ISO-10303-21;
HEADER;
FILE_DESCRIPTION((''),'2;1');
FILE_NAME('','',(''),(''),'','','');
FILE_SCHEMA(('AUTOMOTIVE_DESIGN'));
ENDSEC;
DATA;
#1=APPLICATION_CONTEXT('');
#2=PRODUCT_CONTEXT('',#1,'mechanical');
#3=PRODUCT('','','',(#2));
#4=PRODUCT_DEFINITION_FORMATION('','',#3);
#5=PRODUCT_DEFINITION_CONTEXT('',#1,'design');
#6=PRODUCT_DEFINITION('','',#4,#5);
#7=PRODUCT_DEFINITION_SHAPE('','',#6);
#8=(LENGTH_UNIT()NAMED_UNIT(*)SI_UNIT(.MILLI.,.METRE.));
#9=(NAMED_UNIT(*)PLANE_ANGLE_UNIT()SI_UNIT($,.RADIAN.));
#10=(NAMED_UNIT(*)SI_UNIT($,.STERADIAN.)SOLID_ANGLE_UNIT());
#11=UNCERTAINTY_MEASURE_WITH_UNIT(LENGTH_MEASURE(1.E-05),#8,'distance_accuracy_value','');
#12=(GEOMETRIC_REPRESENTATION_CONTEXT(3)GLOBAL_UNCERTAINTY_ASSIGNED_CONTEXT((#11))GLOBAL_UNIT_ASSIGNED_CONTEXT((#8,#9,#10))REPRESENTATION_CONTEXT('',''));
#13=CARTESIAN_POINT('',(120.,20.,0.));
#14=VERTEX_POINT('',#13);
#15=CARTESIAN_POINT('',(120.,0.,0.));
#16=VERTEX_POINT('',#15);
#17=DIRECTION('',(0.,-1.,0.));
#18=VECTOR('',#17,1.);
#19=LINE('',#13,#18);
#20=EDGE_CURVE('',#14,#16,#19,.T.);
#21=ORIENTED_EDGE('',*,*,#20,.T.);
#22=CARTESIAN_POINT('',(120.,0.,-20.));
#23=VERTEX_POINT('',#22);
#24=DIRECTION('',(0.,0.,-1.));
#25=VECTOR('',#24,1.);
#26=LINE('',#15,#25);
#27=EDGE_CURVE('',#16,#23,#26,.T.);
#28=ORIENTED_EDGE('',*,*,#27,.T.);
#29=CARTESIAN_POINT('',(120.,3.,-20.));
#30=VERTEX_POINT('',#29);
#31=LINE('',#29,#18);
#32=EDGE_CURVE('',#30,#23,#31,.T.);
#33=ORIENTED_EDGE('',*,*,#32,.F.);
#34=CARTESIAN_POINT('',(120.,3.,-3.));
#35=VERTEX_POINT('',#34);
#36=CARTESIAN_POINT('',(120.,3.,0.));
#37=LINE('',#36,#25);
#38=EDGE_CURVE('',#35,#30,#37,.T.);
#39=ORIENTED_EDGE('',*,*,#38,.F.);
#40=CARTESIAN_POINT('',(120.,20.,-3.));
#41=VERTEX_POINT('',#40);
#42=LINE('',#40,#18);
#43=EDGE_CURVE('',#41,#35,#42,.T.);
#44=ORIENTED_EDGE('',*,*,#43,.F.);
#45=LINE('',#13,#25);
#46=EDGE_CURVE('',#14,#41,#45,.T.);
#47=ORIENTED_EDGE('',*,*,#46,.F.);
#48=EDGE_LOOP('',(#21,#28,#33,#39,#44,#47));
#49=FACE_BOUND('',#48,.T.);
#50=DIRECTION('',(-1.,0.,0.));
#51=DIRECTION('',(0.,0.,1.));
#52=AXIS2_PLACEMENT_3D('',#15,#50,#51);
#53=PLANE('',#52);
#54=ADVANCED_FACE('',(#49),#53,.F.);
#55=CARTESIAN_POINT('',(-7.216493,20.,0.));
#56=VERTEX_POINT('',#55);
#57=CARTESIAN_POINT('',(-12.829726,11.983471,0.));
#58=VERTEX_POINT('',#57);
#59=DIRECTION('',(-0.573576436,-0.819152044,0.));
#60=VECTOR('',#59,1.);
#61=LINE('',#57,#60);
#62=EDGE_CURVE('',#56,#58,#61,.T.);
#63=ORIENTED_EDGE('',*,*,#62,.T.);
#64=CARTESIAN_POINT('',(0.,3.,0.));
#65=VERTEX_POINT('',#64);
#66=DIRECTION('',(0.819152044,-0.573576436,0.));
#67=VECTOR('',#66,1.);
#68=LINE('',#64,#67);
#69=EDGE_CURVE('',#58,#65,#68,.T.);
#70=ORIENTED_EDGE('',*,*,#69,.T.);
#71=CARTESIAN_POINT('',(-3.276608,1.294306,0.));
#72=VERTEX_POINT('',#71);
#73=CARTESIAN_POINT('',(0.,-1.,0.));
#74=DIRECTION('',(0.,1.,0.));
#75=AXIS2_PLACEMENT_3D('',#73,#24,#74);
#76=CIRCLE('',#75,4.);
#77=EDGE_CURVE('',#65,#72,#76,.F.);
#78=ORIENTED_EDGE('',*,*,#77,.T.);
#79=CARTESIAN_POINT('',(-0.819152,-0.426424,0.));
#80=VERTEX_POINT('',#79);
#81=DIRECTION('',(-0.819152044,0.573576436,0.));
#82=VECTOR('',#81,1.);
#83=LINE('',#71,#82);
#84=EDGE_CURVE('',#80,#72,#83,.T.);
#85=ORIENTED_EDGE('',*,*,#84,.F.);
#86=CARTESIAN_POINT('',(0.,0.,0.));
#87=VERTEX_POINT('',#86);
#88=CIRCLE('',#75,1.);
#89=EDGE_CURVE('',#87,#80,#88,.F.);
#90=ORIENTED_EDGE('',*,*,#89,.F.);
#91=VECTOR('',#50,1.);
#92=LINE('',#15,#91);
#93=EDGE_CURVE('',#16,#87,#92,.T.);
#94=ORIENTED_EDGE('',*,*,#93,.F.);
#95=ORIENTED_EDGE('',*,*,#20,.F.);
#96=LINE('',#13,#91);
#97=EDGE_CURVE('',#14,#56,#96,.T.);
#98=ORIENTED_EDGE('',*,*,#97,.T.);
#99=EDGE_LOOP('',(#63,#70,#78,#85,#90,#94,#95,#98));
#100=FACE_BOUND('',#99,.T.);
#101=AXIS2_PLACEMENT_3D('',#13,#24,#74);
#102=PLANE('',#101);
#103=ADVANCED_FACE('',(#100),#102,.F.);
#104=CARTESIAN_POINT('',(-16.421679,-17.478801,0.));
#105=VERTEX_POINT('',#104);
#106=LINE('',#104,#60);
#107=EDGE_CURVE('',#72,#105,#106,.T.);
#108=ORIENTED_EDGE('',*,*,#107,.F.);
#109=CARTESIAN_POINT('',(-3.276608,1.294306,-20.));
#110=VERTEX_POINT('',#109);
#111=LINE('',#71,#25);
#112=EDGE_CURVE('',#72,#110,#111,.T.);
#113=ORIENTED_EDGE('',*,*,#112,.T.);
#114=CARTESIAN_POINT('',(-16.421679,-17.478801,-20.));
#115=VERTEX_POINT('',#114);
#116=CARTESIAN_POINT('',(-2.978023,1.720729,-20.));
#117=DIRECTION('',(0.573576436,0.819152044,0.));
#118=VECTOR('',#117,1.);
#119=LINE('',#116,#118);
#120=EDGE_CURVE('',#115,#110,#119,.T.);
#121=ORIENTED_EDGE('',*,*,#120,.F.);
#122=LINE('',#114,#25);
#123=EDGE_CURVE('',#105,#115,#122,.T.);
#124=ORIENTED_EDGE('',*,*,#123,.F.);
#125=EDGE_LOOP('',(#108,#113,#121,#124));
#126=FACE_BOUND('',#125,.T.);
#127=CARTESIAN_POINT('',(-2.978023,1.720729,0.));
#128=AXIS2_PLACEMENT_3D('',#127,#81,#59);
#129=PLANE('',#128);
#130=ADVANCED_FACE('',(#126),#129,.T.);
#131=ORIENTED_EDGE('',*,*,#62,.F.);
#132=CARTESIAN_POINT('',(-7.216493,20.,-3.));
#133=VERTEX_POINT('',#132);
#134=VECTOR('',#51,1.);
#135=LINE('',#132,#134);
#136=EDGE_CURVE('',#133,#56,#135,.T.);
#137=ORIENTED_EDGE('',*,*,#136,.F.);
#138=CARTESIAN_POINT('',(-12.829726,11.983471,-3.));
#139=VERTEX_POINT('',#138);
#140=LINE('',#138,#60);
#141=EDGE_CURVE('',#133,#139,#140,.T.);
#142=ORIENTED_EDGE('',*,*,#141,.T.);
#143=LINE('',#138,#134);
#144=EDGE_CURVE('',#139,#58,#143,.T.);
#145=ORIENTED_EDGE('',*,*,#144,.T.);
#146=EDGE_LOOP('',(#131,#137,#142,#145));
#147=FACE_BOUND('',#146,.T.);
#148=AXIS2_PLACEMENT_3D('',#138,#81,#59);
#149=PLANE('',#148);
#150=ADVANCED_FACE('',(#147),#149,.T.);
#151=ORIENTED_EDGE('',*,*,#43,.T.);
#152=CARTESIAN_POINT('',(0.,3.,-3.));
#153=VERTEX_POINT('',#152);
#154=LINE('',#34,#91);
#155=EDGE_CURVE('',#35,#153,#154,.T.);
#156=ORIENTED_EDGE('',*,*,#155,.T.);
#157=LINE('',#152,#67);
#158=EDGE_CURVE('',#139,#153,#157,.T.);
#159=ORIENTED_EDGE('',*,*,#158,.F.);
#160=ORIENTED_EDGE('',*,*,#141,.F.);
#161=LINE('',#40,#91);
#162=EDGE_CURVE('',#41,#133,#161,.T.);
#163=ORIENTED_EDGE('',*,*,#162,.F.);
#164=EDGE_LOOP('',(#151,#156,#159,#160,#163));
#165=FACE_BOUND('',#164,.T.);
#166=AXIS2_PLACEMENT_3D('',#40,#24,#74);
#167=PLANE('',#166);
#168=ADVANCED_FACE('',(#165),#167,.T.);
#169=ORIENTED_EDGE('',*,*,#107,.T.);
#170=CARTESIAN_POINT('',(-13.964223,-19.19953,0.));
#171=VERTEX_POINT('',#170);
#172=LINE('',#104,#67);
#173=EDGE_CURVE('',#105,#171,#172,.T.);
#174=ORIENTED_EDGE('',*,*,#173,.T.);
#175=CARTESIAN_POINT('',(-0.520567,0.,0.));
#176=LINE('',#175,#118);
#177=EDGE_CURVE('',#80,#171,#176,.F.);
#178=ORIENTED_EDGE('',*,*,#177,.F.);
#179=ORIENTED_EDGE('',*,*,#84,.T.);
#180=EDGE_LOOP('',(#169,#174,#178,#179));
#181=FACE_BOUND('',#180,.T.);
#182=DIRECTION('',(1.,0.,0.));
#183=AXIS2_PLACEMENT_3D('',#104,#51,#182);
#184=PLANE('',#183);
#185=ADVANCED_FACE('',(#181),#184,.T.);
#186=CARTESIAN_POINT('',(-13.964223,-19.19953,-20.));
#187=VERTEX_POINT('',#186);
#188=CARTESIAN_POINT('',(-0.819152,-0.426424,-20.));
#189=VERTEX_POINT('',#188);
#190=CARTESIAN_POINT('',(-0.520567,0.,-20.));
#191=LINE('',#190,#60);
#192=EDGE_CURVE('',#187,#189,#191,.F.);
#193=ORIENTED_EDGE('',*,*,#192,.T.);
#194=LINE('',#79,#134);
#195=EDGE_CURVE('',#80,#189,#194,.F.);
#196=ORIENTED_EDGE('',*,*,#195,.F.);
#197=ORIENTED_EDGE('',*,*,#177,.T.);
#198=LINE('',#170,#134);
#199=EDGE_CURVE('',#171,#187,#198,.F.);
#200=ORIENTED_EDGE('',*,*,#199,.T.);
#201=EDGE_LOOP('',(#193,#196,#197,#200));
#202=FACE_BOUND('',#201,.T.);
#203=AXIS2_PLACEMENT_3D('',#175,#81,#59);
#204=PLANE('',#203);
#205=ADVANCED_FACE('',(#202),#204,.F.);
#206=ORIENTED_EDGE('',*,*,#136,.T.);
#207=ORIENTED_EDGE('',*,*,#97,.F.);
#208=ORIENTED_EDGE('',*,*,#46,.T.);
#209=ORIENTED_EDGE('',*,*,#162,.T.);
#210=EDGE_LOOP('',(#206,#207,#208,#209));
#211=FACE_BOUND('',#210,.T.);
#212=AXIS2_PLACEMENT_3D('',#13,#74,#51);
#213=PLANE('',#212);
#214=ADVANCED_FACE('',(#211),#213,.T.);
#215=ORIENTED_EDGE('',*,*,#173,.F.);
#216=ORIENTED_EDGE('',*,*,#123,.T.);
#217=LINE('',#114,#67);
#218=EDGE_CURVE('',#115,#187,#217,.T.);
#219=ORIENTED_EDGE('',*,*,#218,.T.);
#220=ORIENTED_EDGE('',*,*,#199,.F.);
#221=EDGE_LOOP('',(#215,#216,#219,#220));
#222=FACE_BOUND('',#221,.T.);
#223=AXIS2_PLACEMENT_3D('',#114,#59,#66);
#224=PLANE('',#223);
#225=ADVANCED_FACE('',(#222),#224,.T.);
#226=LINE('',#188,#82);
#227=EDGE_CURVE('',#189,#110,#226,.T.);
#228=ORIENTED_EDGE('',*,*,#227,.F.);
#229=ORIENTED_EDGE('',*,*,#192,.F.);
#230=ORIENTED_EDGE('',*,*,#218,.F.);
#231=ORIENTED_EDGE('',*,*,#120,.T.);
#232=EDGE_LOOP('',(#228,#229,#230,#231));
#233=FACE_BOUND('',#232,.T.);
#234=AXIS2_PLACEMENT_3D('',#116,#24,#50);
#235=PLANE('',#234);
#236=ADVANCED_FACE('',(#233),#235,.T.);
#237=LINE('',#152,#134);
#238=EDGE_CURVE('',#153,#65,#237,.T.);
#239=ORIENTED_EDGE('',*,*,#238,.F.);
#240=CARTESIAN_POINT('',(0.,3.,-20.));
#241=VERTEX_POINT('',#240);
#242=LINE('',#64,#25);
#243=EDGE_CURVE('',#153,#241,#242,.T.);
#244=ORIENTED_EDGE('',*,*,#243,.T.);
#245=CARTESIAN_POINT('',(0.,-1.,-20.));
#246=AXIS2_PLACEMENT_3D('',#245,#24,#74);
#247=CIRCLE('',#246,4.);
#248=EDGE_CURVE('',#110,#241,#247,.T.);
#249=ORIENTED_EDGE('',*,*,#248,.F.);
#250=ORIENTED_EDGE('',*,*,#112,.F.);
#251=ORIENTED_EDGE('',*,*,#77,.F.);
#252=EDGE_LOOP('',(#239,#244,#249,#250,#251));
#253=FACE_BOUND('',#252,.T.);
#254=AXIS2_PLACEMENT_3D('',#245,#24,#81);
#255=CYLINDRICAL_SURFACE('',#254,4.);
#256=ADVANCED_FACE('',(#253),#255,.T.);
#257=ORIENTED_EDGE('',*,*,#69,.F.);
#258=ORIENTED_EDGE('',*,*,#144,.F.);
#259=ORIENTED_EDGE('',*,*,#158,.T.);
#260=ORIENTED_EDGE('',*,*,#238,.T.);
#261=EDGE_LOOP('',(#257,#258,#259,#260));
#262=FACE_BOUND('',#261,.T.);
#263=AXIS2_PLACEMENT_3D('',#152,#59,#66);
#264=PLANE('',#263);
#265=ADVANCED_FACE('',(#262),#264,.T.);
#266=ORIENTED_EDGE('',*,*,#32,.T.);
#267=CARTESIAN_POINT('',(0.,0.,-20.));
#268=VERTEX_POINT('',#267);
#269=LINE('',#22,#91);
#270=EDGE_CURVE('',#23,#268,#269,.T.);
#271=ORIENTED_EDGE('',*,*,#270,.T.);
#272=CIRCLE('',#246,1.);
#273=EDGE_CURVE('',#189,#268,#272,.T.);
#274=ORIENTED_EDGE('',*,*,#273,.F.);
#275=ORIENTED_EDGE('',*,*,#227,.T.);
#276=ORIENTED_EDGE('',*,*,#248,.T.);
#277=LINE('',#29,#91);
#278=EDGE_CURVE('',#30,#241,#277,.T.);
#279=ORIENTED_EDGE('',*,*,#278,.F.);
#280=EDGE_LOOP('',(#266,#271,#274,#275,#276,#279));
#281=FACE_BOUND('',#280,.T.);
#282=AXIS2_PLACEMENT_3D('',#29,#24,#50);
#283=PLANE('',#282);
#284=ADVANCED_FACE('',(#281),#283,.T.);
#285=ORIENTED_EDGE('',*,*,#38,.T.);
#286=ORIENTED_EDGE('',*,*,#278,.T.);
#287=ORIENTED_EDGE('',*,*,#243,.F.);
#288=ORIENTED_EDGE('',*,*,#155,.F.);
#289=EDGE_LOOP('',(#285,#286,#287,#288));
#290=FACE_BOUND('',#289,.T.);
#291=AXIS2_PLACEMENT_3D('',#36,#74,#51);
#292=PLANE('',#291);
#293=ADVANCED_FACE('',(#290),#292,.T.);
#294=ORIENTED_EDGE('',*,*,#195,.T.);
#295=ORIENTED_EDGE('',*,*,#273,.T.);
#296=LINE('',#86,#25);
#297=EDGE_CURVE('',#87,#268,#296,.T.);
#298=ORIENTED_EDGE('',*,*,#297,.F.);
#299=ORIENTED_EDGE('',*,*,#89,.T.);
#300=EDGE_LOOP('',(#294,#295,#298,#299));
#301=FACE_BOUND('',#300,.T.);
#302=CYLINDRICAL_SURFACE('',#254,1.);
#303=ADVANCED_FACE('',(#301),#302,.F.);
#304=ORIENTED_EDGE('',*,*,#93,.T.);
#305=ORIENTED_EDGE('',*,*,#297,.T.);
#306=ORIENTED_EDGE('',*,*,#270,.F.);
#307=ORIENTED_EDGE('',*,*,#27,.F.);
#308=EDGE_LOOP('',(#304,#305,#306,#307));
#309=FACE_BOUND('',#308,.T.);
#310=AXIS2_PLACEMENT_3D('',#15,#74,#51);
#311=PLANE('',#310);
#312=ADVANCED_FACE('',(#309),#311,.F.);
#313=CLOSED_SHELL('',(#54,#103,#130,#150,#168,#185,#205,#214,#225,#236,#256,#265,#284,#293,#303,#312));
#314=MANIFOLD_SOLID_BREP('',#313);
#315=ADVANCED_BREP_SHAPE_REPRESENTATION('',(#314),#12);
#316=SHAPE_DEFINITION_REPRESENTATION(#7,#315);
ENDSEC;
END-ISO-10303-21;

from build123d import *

# Parameters (mm, degrees)
EXTRUDE_1_DEPTH        = 120
SKETCH_3_W             = 120
SKETCH_3_H             = 20
SM_BASE_FLANGE_1_DEPTH = 3
SM_EDGE_FLANGE_1_DEPTH = 20
EXTRUDE_1_2_DEPTH      = 3


# Sheet-metal steps are written as plain solids
with BuildPart() as part:
    # Sketch 1 → Extrude 1 (new body)
    with BuildSketch(Plane(origin=(0, 0, 0), x_dir=(0, 0, -1), z_dir=(1, 0, 0))):
        Polygon((0, 20), (0, 0), (20, 0), (20, 3), (3, 3), (3, 20), align=None)
    extrude(amount=EXTRUDE_1_DEPTH)



with BuildPart() as body_2:
    # Эскиз3 → Базовая кромка1 (new body)
    with BuildSketch(Plane.XZ):
        with Locations((60, -10)):
            Rectangle(SKETCH_3_W, SKETCH_3_H)
    extrude(amount=-SM_BASE_FLANGE_1_DEPTH)

    # Ребро-кромка1 section (across the edge) → Ребро-кромка1 (add)
    with BuildSketch(Plane(origin=(-0.520567051, 0, 0), x_dir=(0.8191520442889892, -0.5735764363510499, 0), z_dir=(0, 0, -1))):
        with BuildLine():
            Line((-3, 0.520567051), (-3, 23.438298848))
            Line((-3, 23.438298848), (0, 23.438298848))
            Line((0, 23.438298848), (0, 0.520567051))
            ThreePointArc((0, 0.520567051), (0.112989167, 0.058818437), (0.426423564, -0.298584994))
            Line((0.426423564, -0.298584994), (-1.294305745, -2.756041127))
            ThreePointArc((-1.294305745, -2.756041127), (-2.548043333, -1.326427402), (-3, 0.520567051))
        make_face()
    extrude(amount=SM_EDGE_FLANGE_1_DEPTH)


with BuildPart() as part_1:
    add(part.part)

    add(body_2.part)  # Extrude 1 2 merges body 2
    # Эскиз11 → Extrude 1 2 (add)
    with BuildSketch(Plane.XY):
        Polygon((0, 20), (0, 3), (-12.829726495, 11.983471205), (-7.216492602, 20), align=None)
    extrude(amount=-EXTRUDE_1_2_DEPTH)


solid = part_1.part
